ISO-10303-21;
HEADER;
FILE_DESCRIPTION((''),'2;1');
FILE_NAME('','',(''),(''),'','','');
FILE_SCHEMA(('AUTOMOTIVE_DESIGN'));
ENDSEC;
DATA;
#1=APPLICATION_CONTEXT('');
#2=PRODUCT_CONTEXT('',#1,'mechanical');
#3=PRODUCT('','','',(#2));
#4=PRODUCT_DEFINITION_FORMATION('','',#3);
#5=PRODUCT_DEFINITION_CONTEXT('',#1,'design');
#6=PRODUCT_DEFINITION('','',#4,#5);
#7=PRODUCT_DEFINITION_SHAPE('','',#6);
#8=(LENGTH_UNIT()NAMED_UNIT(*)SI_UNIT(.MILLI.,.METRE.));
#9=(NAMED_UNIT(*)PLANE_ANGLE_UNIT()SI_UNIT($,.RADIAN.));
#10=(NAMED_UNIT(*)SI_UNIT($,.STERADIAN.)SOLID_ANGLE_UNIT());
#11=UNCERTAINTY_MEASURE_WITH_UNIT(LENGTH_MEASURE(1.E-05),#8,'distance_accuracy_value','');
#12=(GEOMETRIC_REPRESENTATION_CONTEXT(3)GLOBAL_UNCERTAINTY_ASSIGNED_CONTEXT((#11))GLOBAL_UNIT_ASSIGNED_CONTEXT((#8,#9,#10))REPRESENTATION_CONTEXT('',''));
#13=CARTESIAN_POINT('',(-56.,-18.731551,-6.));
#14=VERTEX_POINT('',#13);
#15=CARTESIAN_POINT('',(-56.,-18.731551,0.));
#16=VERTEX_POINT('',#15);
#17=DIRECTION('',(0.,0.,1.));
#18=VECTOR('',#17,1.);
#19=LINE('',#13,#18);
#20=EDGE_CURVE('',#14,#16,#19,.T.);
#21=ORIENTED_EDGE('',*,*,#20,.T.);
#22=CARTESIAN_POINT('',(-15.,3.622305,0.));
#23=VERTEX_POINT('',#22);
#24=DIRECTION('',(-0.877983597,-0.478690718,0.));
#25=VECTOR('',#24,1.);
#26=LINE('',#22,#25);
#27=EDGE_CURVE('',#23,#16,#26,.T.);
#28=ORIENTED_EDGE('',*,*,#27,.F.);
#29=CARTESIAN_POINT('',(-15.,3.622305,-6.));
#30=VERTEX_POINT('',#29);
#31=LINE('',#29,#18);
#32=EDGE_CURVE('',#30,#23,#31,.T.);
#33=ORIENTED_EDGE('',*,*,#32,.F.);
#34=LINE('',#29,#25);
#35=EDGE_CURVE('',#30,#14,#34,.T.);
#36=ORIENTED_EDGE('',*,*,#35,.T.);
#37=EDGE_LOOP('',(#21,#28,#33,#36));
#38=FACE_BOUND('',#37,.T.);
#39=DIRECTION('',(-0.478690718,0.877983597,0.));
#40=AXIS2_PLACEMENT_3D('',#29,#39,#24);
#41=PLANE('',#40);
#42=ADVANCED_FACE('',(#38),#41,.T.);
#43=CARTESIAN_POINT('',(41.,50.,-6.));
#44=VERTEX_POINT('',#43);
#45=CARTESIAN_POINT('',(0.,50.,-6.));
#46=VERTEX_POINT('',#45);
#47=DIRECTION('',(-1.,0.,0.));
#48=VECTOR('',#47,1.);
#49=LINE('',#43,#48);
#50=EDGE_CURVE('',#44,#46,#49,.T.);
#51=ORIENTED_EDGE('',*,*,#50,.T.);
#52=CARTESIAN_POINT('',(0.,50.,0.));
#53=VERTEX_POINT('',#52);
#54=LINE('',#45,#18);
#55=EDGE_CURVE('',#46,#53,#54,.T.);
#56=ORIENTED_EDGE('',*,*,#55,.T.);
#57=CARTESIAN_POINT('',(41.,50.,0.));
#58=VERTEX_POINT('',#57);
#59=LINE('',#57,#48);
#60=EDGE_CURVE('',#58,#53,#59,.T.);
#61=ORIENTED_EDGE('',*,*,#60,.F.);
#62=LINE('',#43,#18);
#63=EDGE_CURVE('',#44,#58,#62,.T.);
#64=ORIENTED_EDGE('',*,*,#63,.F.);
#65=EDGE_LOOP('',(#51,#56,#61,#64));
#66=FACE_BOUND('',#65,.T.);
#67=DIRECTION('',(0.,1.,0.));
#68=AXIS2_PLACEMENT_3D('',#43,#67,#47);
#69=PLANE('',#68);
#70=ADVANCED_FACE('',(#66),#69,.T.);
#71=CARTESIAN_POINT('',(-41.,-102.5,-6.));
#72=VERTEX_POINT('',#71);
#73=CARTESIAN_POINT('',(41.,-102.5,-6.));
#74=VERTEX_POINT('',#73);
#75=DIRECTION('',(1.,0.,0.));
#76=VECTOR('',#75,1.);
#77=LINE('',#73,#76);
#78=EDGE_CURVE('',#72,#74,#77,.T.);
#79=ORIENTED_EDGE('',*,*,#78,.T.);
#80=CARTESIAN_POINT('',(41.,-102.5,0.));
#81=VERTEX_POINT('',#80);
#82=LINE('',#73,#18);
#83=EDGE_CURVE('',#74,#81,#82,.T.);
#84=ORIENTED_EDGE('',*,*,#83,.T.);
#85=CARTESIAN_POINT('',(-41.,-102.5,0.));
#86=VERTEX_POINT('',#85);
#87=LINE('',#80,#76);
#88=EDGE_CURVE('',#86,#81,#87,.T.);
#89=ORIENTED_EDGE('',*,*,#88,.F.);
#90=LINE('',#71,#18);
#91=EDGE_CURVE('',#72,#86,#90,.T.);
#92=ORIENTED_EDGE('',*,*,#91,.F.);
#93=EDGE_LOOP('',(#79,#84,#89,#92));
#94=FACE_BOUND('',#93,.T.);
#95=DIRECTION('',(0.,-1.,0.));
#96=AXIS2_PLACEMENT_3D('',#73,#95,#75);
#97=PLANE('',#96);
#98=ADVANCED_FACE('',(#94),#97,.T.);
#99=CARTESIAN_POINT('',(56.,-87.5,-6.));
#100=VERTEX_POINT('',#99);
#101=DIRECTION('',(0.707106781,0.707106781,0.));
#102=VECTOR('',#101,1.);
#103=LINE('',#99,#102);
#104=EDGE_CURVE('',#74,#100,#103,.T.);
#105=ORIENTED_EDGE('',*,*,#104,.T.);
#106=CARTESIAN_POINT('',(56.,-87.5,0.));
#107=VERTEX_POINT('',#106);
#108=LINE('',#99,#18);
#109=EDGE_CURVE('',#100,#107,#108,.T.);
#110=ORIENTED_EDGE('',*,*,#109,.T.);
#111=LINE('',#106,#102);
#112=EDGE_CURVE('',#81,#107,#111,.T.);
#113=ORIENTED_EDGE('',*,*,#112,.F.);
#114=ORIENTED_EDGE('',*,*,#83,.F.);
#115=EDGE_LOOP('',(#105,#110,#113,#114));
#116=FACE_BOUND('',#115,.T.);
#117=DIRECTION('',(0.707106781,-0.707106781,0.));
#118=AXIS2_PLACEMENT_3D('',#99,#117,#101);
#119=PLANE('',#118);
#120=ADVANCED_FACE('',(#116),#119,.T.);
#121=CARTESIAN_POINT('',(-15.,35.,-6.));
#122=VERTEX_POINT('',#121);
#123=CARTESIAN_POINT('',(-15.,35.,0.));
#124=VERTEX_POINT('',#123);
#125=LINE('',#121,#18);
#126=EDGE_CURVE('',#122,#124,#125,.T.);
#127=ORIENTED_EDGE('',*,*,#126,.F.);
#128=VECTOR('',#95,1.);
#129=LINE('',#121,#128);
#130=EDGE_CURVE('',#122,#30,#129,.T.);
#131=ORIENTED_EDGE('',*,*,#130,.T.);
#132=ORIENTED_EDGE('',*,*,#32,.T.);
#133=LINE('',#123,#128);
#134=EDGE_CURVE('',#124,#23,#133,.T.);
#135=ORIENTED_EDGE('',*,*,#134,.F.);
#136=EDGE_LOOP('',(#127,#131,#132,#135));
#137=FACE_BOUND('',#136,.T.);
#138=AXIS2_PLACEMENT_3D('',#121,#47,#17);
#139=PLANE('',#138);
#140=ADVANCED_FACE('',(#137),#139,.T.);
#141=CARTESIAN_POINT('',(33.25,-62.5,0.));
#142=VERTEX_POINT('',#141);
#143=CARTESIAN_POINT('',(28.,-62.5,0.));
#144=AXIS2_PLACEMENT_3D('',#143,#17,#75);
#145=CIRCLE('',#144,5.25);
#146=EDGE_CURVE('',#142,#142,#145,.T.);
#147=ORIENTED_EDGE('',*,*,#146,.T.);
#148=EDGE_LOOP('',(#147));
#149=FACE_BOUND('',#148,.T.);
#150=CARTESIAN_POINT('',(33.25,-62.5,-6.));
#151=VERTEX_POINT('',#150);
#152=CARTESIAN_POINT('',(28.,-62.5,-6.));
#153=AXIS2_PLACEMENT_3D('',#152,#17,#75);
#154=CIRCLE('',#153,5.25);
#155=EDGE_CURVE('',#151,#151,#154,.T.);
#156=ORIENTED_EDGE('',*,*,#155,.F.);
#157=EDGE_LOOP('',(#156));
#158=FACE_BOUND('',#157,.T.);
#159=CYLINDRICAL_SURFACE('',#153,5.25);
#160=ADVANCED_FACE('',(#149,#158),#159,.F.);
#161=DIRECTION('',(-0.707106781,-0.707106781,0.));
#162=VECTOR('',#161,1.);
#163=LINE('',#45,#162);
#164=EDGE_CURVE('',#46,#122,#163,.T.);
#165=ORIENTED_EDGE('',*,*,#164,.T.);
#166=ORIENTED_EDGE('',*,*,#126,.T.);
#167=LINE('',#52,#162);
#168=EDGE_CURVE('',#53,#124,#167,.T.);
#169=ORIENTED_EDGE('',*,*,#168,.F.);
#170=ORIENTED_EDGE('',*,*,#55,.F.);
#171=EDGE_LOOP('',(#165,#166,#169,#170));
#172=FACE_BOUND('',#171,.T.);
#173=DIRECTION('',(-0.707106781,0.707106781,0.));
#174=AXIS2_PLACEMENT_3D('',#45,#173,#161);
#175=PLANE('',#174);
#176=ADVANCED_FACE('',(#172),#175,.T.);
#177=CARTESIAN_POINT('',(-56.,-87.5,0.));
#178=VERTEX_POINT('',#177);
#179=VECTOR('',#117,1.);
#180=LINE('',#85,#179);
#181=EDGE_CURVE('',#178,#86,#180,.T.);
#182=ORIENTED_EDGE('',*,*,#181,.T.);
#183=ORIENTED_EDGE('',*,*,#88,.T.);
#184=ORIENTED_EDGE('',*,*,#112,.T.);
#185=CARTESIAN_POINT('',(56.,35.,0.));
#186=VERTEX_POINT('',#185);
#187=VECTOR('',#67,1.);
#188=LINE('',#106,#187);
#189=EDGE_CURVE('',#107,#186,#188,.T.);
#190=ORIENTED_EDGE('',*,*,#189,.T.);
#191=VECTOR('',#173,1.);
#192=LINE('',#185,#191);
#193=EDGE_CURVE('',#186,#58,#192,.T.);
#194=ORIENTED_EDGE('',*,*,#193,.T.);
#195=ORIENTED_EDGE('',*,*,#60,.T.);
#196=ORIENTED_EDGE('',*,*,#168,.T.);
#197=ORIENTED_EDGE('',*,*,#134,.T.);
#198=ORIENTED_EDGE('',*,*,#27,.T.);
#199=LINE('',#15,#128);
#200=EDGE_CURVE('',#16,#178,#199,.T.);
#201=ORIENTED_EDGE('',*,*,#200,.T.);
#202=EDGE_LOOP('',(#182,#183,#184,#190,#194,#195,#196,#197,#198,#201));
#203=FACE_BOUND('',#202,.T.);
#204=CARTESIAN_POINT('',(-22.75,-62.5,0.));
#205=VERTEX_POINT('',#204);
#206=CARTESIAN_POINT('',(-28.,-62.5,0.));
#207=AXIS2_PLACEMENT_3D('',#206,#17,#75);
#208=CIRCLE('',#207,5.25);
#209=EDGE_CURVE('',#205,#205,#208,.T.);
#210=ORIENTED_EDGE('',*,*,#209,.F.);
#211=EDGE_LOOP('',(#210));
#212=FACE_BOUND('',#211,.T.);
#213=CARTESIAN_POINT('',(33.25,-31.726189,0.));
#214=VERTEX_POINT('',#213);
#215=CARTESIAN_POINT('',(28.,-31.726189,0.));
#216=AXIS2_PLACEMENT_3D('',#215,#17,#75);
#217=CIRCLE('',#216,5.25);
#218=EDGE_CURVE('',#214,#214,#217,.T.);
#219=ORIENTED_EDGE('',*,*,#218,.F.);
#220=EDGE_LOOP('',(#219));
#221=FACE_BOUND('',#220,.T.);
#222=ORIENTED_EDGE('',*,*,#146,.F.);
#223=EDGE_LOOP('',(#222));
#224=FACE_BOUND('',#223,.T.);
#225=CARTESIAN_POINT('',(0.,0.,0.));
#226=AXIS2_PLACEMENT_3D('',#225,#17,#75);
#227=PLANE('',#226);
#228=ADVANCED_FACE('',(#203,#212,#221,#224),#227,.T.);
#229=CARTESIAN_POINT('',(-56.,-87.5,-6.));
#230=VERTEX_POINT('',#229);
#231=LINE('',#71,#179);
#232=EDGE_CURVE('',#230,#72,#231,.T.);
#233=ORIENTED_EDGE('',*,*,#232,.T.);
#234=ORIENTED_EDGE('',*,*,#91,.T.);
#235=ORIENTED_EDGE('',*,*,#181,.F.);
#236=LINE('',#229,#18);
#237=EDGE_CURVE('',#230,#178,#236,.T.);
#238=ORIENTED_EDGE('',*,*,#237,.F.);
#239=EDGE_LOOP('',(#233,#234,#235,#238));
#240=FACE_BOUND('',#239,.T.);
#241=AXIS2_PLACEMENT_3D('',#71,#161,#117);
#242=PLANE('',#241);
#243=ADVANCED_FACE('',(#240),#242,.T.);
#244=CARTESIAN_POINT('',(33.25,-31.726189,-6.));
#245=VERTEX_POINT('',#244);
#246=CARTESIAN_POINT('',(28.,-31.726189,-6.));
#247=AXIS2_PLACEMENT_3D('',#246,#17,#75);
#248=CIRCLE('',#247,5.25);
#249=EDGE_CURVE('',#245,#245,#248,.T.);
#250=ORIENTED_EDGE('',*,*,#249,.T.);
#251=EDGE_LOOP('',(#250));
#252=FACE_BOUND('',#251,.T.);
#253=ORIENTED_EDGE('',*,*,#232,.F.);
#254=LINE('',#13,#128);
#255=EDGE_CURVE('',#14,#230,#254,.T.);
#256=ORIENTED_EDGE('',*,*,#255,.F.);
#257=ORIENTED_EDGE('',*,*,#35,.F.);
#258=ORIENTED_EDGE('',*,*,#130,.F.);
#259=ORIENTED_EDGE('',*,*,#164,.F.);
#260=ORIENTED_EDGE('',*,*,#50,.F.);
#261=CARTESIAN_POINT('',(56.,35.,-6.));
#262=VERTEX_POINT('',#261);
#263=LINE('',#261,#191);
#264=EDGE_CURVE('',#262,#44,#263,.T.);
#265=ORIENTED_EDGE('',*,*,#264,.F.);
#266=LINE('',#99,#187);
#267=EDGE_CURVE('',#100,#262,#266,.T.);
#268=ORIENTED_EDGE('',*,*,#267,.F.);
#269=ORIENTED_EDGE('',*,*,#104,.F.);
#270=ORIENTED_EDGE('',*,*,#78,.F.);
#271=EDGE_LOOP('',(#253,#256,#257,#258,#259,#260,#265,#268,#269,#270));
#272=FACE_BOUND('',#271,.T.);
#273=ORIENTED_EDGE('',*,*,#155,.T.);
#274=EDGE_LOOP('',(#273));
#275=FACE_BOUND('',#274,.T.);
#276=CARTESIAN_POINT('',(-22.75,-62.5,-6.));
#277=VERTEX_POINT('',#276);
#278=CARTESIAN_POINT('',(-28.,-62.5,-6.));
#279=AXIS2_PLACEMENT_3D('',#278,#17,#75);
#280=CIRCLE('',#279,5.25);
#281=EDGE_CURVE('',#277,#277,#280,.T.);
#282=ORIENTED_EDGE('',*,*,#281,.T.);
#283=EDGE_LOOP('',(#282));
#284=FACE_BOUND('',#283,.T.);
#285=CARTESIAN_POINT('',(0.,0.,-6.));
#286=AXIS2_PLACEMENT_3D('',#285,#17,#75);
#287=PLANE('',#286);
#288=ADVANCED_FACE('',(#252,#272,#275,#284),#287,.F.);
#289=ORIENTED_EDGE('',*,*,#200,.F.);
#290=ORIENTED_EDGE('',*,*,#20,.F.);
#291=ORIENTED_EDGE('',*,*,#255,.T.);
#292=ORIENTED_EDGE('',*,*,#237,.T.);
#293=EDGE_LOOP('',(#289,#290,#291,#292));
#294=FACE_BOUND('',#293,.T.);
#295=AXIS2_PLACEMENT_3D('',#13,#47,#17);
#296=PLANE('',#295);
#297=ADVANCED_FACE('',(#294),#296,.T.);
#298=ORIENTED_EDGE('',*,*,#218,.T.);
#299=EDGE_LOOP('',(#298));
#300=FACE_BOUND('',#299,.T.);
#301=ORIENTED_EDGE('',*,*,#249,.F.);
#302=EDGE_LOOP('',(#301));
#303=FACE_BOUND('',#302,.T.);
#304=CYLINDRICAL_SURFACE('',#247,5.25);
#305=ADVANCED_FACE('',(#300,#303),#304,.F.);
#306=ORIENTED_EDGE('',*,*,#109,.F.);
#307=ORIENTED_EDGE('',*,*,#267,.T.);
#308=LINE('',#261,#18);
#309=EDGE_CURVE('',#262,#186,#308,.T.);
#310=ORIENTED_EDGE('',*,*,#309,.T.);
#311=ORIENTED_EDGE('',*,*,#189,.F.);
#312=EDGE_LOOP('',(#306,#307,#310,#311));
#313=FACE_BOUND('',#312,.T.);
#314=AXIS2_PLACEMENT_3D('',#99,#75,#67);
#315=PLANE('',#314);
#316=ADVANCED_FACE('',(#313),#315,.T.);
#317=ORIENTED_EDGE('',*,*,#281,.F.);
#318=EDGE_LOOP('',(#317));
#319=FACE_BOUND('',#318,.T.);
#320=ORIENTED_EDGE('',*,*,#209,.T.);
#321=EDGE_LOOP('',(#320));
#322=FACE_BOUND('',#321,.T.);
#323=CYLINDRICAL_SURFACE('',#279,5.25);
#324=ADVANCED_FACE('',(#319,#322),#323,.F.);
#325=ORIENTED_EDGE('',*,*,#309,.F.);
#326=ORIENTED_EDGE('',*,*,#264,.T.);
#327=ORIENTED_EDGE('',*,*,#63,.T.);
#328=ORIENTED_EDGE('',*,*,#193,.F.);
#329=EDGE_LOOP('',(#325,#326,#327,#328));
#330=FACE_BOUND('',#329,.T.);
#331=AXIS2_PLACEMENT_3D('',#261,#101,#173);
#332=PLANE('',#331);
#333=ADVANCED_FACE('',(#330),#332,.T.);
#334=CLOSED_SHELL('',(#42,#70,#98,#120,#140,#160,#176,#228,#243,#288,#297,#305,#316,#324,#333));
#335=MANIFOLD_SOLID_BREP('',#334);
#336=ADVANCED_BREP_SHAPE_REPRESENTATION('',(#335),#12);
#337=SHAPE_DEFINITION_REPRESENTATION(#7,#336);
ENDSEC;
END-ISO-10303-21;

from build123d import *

# Parameters (mm, degrees)
SKETCH_1_R             = 5.25
SM_BASE_FLANGE_1_DEPTH = 6


# Sheet-metal steps are written as plain solids
with BuildPart() as part:
    # Sketch 1 → Базовая кромка1 (new body)
    with BuildSketch(Plane.XY):
        Polygon((-41, -102.5), (-56, -87.5), (-56, -18.731551379), (-15, 3.62230522), (-15, 35), (0, 50), (41, 50), (56, 35), (56, -87.5), (41, -102.5), align=None)
        with Locations((-28, -62.5)):
            Circle(SKETCH_1_R, mode=Mode.SUBTRACT)
        with Locations((28, -62.5)):
            Circle(SKETCH_1_R, mode=Mode.SUBTRACT)
        with Locations((28, -31.72618932)):
            Circle(SKETCH_1_R, mode=Mode.SUBTRACT)
    extrude(amount=-SM_BASE_FLANGE_1_DEPTH)


solid = part.part
